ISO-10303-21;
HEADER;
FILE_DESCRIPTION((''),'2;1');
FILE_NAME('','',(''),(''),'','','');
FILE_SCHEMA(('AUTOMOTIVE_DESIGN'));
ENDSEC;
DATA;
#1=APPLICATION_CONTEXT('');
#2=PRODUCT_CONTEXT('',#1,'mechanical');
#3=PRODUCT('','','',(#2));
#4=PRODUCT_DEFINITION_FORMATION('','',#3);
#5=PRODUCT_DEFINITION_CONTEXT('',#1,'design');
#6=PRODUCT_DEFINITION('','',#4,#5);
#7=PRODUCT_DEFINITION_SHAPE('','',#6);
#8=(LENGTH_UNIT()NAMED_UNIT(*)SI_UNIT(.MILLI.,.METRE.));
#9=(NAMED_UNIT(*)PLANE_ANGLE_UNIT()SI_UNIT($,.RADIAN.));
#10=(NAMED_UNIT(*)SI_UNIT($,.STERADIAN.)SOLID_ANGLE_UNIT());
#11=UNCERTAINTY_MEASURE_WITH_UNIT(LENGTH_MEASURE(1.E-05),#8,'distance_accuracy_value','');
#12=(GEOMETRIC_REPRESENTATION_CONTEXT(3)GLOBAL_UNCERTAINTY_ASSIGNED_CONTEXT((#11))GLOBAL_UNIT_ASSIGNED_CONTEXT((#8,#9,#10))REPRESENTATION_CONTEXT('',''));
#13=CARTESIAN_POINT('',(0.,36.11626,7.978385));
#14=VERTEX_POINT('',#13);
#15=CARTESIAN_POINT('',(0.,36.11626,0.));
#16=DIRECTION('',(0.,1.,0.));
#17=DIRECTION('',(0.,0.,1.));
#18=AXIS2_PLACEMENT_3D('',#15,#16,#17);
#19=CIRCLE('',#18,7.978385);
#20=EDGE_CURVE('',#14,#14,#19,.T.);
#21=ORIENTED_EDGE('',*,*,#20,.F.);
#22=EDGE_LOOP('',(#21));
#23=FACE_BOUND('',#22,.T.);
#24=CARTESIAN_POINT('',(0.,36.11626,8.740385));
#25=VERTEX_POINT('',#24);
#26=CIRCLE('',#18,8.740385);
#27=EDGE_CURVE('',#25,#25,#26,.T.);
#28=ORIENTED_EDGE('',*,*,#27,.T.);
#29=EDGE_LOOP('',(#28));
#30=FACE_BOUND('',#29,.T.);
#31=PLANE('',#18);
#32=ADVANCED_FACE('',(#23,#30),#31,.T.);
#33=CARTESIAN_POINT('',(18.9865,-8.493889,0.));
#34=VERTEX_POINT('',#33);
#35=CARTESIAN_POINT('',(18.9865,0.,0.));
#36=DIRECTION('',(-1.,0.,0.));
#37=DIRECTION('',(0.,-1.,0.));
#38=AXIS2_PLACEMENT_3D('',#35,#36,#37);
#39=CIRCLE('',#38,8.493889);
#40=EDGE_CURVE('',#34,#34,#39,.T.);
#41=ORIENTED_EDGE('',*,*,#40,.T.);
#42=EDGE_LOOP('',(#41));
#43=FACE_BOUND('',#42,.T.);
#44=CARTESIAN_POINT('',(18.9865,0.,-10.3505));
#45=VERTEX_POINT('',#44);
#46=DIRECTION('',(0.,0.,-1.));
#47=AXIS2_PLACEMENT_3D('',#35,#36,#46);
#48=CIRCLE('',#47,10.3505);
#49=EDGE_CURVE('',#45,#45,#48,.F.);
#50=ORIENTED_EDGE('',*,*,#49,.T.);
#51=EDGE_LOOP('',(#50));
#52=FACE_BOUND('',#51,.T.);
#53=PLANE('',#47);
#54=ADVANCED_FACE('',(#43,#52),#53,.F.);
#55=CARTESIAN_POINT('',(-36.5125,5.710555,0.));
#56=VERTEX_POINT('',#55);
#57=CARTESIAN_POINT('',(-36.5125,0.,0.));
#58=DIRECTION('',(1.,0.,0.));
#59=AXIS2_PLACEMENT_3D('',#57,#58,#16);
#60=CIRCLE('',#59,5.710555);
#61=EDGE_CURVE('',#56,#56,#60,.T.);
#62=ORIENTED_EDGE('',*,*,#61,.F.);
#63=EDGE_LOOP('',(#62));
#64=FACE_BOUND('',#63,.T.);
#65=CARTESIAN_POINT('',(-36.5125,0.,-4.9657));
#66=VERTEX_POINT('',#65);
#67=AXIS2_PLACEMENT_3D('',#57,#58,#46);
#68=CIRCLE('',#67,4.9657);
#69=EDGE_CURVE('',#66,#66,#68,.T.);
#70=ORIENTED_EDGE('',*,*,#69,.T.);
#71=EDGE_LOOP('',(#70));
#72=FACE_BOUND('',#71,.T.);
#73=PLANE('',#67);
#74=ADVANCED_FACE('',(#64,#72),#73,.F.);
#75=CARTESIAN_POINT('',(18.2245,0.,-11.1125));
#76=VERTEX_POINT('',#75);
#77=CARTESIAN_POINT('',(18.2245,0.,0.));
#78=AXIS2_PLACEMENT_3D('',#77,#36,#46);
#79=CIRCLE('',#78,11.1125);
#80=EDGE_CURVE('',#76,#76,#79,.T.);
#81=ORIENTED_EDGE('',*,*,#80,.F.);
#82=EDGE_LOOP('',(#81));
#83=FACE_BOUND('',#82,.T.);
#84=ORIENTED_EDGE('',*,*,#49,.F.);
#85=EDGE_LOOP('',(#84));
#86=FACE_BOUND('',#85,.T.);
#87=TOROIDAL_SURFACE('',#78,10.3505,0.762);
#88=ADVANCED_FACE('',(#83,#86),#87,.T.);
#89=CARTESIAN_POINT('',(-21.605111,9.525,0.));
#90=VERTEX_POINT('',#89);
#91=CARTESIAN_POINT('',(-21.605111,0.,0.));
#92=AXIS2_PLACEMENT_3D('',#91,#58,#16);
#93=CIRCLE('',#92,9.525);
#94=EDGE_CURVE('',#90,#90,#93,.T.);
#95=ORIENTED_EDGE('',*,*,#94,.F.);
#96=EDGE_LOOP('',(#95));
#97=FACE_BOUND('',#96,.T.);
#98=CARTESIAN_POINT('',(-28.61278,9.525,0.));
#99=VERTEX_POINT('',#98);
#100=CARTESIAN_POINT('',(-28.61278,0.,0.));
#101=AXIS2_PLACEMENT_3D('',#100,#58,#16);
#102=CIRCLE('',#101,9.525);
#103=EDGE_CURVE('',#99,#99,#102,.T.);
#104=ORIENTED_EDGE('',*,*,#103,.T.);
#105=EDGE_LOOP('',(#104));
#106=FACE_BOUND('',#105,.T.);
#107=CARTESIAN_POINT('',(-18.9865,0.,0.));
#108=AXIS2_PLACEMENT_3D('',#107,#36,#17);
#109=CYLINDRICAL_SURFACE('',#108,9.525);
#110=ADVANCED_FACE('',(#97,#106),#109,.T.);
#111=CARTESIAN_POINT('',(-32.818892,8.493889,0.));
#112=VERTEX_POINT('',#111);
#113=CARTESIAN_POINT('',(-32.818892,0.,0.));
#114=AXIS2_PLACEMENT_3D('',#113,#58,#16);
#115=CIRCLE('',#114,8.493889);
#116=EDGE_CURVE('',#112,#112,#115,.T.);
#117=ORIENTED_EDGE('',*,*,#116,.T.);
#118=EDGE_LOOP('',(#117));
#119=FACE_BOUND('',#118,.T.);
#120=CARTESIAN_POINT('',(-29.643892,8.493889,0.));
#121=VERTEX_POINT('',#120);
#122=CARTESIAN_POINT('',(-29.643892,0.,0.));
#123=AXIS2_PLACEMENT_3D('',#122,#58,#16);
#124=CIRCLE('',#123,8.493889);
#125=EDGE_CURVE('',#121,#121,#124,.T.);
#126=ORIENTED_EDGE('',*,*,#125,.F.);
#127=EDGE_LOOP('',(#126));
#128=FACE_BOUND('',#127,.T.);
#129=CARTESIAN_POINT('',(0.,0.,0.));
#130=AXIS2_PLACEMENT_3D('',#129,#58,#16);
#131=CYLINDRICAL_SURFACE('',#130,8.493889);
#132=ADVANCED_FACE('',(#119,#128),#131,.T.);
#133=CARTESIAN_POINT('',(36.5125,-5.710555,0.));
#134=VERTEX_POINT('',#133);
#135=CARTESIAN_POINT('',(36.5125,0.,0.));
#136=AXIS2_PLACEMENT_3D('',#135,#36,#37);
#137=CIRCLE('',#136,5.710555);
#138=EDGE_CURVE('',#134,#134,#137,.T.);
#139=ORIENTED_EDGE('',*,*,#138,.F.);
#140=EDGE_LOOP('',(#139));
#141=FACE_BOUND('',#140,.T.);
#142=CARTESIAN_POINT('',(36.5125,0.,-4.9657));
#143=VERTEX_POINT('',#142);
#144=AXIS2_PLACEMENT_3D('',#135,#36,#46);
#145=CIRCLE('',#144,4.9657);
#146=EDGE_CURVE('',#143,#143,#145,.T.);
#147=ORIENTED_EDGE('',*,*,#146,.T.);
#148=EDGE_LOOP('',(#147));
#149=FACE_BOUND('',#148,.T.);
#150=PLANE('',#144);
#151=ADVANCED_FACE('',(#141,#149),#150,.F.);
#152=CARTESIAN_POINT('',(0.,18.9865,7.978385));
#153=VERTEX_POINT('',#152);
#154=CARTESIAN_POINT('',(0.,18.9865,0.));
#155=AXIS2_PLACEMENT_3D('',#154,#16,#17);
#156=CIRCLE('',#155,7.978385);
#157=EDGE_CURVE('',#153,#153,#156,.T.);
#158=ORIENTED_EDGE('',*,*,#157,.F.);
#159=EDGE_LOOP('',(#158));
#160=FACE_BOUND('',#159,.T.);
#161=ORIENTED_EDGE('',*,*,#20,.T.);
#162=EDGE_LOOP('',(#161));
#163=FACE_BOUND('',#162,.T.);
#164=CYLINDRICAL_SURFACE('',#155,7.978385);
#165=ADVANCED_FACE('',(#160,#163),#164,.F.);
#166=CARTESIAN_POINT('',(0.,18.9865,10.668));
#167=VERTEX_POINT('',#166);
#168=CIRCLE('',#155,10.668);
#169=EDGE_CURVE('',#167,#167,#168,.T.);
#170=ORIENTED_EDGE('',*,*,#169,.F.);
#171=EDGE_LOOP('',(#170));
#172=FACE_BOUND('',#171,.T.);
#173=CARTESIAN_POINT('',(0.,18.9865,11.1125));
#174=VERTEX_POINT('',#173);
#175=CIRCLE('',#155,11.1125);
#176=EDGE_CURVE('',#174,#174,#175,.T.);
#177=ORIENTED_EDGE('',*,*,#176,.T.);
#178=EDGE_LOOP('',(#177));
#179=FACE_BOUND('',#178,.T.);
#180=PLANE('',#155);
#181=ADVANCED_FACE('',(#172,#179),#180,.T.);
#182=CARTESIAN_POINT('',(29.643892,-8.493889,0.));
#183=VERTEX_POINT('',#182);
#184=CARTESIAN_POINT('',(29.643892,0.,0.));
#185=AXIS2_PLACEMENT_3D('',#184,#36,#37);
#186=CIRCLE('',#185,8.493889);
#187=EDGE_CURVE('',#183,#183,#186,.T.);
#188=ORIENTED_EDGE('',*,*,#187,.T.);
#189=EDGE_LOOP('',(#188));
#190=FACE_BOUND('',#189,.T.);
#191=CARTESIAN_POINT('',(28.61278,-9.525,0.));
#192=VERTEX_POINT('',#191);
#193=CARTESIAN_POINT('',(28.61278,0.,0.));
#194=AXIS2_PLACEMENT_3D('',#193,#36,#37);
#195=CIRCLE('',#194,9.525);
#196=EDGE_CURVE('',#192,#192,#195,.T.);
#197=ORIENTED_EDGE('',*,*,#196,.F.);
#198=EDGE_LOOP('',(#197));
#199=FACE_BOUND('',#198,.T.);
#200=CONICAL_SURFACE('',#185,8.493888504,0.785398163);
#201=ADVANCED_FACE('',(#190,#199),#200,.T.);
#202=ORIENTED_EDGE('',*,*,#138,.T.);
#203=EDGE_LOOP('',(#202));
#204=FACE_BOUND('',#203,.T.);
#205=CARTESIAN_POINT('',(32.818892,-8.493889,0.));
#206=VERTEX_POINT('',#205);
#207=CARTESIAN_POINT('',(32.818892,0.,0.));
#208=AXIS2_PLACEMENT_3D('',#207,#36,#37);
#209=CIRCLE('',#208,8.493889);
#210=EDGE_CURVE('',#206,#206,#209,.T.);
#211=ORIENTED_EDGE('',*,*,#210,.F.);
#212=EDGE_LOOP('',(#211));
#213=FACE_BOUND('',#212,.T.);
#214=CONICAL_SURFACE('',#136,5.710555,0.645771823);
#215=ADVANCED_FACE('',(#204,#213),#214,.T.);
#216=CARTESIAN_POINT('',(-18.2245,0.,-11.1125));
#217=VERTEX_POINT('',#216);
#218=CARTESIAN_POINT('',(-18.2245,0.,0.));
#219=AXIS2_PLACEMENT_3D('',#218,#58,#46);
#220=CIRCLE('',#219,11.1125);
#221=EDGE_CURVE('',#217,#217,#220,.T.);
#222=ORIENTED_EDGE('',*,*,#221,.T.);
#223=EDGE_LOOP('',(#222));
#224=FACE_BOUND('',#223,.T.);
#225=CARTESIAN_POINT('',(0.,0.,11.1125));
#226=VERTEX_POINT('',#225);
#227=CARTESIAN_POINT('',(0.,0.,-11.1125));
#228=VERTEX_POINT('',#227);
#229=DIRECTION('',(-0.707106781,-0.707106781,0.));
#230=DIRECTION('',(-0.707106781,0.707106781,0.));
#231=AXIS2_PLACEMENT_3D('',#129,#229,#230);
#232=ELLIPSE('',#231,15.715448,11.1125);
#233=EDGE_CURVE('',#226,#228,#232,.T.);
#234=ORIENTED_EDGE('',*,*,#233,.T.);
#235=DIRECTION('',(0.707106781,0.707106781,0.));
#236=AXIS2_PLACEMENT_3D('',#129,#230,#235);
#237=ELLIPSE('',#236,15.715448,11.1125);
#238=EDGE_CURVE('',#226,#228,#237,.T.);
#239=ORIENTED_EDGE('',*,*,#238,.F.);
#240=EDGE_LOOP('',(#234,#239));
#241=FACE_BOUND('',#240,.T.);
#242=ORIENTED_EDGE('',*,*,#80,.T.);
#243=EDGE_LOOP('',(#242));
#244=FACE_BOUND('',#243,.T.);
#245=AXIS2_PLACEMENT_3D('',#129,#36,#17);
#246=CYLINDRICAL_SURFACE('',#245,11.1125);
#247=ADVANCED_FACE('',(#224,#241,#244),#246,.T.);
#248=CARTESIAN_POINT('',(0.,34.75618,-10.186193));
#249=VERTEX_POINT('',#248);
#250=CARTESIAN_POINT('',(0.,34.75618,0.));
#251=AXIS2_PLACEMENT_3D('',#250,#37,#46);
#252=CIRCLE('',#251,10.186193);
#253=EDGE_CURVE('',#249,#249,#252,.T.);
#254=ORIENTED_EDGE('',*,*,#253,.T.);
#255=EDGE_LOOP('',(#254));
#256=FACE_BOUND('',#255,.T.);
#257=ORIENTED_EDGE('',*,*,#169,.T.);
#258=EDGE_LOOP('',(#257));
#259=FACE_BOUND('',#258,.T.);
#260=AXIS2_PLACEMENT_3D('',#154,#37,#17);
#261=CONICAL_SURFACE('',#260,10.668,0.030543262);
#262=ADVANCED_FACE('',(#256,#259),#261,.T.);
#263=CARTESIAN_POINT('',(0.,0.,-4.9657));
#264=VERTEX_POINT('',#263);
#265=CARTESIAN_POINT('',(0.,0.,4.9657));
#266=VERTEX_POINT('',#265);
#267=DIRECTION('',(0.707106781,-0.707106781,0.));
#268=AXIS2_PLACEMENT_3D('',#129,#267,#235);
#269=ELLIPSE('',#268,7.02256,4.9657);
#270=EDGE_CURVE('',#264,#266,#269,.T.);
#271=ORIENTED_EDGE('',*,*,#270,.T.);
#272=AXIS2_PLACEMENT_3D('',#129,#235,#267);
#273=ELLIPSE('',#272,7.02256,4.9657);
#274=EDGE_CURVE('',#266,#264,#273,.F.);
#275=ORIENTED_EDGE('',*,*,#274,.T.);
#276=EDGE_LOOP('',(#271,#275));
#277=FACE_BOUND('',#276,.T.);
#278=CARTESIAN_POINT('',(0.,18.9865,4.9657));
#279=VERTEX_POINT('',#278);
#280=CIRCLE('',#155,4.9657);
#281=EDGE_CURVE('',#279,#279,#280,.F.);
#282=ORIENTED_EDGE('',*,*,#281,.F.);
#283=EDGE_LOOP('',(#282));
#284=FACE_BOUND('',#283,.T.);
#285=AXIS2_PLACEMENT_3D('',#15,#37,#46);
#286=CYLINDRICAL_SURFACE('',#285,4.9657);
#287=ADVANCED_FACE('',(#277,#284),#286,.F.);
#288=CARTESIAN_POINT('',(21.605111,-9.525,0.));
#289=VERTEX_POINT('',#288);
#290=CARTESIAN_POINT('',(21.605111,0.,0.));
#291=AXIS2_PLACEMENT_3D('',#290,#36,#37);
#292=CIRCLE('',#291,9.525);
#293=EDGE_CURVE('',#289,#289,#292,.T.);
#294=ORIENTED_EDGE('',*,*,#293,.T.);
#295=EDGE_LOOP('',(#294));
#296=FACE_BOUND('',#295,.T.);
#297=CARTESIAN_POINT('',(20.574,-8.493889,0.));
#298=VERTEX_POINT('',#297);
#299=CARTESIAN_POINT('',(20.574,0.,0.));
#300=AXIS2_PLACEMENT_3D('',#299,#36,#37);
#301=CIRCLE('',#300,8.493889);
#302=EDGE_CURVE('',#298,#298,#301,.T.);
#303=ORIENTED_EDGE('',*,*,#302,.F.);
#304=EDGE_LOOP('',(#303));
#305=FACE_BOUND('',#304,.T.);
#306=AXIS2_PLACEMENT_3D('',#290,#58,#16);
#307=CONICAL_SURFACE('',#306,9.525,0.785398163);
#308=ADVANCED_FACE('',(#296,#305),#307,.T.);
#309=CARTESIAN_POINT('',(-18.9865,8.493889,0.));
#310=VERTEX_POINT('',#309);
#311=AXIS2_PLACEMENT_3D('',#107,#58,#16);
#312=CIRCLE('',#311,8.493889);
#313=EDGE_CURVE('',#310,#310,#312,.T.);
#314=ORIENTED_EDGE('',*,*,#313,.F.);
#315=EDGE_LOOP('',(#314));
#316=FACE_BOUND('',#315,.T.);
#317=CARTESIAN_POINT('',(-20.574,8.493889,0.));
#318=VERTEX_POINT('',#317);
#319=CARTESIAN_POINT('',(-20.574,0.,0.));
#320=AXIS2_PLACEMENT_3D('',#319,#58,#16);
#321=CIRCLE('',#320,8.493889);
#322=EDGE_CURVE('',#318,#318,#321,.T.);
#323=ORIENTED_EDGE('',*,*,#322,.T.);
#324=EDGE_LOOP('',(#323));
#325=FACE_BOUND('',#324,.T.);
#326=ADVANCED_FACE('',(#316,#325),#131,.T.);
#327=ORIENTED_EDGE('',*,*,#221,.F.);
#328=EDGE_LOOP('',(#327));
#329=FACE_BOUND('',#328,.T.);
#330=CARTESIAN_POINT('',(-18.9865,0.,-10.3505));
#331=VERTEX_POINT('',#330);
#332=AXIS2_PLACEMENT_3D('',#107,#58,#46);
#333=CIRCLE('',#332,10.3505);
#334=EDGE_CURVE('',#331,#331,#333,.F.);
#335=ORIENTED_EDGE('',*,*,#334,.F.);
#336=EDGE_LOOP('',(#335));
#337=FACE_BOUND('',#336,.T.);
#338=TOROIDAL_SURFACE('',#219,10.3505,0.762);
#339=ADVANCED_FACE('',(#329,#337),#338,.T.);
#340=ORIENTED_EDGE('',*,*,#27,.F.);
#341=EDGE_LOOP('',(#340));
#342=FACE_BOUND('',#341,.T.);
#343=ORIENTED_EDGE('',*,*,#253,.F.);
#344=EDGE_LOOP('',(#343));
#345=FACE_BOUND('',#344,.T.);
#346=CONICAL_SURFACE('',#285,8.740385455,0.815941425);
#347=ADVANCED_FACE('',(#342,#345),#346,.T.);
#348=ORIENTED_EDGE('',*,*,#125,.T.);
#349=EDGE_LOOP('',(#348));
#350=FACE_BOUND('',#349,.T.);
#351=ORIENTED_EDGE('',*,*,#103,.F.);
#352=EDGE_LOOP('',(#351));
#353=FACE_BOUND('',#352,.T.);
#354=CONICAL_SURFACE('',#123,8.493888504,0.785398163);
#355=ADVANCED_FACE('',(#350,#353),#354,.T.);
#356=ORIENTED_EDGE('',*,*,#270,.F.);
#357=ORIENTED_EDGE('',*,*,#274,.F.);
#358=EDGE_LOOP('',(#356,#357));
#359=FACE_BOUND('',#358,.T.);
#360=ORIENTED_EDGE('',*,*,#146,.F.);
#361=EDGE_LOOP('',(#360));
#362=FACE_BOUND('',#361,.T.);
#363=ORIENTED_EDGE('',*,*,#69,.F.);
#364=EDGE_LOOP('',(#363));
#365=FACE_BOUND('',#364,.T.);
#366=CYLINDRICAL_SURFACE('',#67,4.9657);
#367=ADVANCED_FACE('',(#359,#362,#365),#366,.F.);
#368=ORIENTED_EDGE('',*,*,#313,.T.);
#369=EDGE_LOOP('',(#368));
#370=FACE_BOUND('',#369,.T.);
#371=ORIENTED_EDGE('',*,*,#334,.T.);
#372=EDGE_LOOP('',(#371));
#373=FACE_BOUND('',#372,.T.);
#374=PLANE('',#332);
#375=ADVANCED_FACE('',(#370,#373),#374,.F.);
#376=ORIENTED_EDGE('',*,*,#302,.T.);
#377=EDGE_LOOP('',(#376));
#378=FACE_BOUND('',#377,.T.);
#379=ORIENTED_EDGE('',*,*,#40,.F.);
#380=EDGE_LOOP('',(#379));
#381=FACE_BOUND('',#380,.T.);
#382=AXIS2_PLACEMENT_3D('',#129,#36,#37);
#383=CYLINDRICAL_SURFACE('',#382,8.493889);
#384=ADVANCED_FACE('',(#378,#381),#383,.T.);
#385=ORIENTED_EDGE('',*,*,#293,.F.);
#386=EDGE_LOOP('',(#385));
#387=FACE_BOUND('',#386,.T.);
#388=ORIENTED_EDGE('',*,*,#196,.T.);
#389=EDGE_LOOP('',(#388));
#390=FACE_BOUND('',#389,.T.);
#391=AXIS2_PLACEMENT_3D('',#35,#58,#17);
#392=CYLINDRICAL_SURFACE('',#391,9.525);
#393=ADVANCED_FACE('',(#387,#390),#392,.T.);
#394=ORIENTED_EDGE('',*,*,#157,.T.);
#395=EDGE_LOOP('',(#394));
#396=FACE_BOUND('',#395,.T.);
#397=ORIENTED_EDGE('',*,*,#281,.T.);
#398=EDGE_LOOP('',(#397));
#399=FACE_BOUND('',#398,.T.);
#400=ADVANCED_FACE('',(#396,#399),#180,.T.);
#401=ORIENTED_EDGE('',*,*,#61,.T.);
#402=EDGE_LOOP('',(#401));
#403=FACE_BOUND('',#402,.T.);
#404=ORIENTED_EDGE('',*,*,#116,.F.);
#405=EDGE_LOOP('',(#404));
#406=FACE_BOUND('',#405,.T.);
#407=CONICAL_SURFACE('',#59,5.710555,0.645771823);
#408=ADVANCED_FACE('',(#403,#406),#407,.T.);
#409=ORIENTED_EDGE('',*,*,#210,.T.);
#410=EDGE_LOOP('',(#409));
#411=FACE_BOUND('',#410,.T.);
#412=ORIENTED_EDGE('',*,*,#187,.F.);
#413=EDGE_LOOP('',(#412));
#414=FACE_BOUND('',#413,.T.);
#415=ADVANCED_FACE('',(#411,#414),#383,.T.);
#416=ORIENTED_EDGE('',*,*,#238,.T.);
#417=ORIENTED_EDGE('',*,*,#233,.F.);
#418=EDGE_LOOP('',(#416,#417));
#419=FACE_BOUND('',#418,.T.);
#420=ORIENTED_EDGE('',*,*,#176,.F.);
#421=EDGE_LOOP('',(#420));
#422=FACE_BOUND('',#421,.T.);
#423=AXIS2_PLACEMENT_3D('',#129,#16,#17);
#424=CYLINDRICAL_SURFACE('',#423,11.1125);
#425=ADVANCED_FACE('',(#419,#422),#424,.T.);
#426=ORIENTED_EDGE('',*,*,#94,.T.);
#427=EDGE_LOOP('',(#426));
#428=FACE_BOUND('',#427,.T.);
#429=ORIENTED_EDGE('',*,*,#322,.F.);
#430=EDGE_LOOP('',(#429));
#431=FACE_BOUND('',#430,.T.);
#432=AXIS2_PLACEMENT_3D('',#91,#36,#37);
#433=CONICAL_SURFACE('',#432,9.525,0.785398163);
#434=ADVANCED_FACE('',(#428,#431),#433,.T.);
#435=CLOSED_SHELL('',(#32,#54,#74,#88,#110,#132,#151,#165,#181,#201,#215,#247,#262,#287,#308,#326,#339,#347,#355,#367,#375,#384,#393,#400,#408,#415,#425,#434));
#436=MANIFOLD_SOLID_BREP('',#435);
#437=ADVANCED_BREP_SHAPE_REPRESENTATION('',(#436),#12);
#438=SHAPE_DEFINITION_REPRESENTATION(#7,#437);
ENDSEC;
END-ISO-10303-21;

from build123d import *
from build123d.topology import SkipClean

# Parameters (mm, degrees)
SKETCH2_R           = 9.525
EXTRUDE1_DEPTH      = 17.526
SKETCH15_R          = 11.1125
BOSS_EXTRUDE1_DEPTH = 18.9865
SKETCH16_R          = 4.9657
CUT_EXTRUDE1_DEPTH  = 40.750949281
SKETCH20_R          = 11.1125
BOSS_EXTRUDE2_DEPTH = 18.9865
SKETCH22_R          = 10.668
BOSS_EXTRUDE3_DEPTH = 17.12976
BOSS_EXTRUDE3_TAPER = 1.75
CHAMFER1_SIZE       = 1.360714286
CHAMFER1_SIZE_2     = 1.404253042
SKETCH25_R          = 10.668
BOSS_EXTRUDE4_DEPTH = 17.12976
BOSS_EXTRUDE4_DRAFT = -15
SKETCH28_R          = 7.978385455
CUT_EXTRUDE6_DEPTH  = 17.12976
FILLET1_R           = 0.762
CIRPATTERN1_COUNT   = 2
CIRPATTERN1_ANGLE   = 180
SKETCH26_R          = 4.9657
CUT_EXTRUDE4_DEPTH  = 83.22239678
SKETCH29_R          = 4.9657
CUT_EXTRUDE7_DEPTH  = 53.545547444


with BuildPart() as part:
    # Sketch2 → Extrude1 (new body)
    with BuildSketch(Plane(origin=(-36.5125, 0, 0), x_dir=(0, 0, -1), z_dir=(1, 0, 0))):
        Circle(SKETCH2_R)
    extrude(amount=EXTRUDE1_DEPTH)

    # Sketch5 → Cut-Revolve1 (revolve, cut)
    with BuildSketch(Plane.XY):
        Polygon((-32.818891687, 8.493888504), (-29.643891687, 8.493888504), (-28.612780191, 9.525), (-36.5125, 9.525), (-36.5125, 5.710555), align=None)
        Polygon((-18.9865, 8.493888504), (-20.574, 8.493888504), (-21.605111496, 9.525), (-18.9865, 9.525), align=None)
    revolve(axis=Axis((0, 0, 0), (-1, 0, 0)), mode=Mode.SUBTRACT)

    # Sketch15 → Boss-Extrude1 (add)
    with BuildSketch(Plane(origin=(-18.9865, 0, 0), x_dir=(0, 0, -1), z_dir=(1, 0, 0))):
        Circle(SKETCH15_R)
    extrude(amount=BOSS_EXTRUDE1_DEPTH)

    # Sketch16 → Cut-Extrude1 (cut, through all)
    with BuildSketch(Plane(origin=(0, 0, 0), x_dir=(0, 0, -1), z_dir=(1, 0, 0))):
        Circle(SKETCH16_R)
    extrude(amount=-CUT_EXTRUDE1_DEPTH, mode=Mode.SUBTRACT)

    # Fillet1
    fillet1_edges = [part.edges().sort_by_distance(p)[0] for p in [
        (-18.9865, 0, 11.1125),
    ]]
    fillet(fillet1_edges, radius=FILLET1_R)


with BuildPart() as body_2:
    # Sketch20 → Boss-Extrude2 (new body)
    with BuildSketch(Plane(origin=(0, 18.9865, 0), x_dir=(-1, 0, 0), z_dir=(0, 1, 0))):
        with Locations(Location((0, 0, 0), (0, 0, 90))):
            Circle(SKETCH20_R)
    extrude(amount=-BOSS_EXTRUDE2_DEPTH)


with BuildPart() as body_3:
    # Sketch22 → Boss-Extrude3 (new body)
    with BuildSketch(Plane(origin=(0, 18.9865, 0), x_dir=(-1, 0, 0), z_dir=(0, 1, 0))):
        Circle(SKETCH22_R)
    extrude(amount=BOSS_EXTRUDE3_DEPTH, taper=BOSS_EXTRUDE3_TAPER)

    # Chamfer1
    # the kernel refuses this chamfer: 1.404253042, 1.360714286 mm, written as the material it takes off along each edge
    with BuildSketch(Plane(origin=(0, 36.11626, 0), x_dir=(-1, 0, 0), z_dir=(0, 0, 1))) as chamfer1_piece_1:
        Polygon((10.144638497 + CHAMFER1_SIZE * 0.0305385132034, CHAMFER1_SIZE * 0.999533590627), (10.144638497 - CHAMFER1_SIZE_2, 0), (10.144638497, 0), align=None)
    revolve(axis=Axis((0, 36.11626, 0), (0, -1, 0)), mode=Mode.SUBTRACT)


with BuildPart() as boss_extrude4_tool:
    # Sketch25 → Boss-Extrude4 (with draft: the straight prism first)
    with BuildSketch(Plane.XZ.offset(-18.9865)):
        Circle(SKETCH25_R)
    extrude(amount=-BOSS_EXTRUDE4_DEPTH)
    # Boss-Extrude4: the draft: its side faces are tilted about the plane it starts from
    boss_extrude4_sides = [boss_extrude4_tool.faces().sort_by_distance(p)[0] for p in [
        (-10.668, 27.55138, 0),
    ]]
    draft(boss_extrude4_sides, Plane.XZ.offset(-18.9865), BOSS_EXTRUDE4_DRAFT)


with BuildPart() as body_3_1:
    add(body_3.part)

    # Boss-Extrude4: add boss_extrude4_tool
    add(boss_extrude4_tool.part)

    # Sketch28 → Cut-Extrude6 (cut)
    with BuildSketch(Plane(origin=(0, 36.11626, 0), x_dir=(1, 0, 0), z_dir=(0, 1, 0))):
        with Locations(Location((0, 0, 0), (0, 0, 270))):
            Circle(SKETCH28_R)
    extrude(amount=-CUT_EXTRUDE6_DEPTH, mode=Mode.SUBTRACT)


with BuildPart() as cirpattern1_1:
    # CirPattern1: pattern copy
    add(part.part.rotate(Axis((0, 0, 12.651043997), (0, 0, -1)), 1 * CIRPATTERN1_ANGLE / (CIRPATTERN1_COUNT - 1)))


with BuildPart() as part_1:
    add(part.part)

    # Combine2: union body 3, body 2, CirPattern1_1
    add(body_3_1.part)
    add(body_2.part)
    add(cirpattern1_1.part)

    # Sketch30 → Revolve1 (revolve)
    with SkipClean():  # the faces are left unmerged after this step: merging them gives an invalid solid
        with BuildSketch(Plane.XY, mode=Mode.PRIVATE) as revolve1_sk:
            with BuildLine():
                Line((0, 18.9865), (0, 9.49325))
                ThreePointArc((0, 9.49325), (-5.981989992, 13.352586812), (-10.922, 18.4785))
                Line((-10.922, 18.4785), (-10.922, 18.9865))
                Line((-10.922, 18.9865), (0, 18.9865))
            make_face()
        revolve(revolve1_sk.sketch.rotate(Axis((0, 18.9865, 0), (0, -1, 0)), 270), axis=Axis((0, 18.9865, 0), (0, -1, 0)))

    # Sketch26 → Cut-Extrude4 (cut, through all)
    with SkipClean():  # the faces are left unmerged after this step: merging them gives an invalid solid
        with BuildSketch(Plane.ZY.offset(36.5125)):
            with Locations(Location((0, 0, 0), (0, 0, 180))):
                Circle(SKETCH26_R)
        extrude(amount=-CUT_EXTRUDE4_DEPTH, mode=Mode.SUBTRACT)

    # Sketch29 → Cut-Extrude7 (cut, through all)
    with SkipClean():  # the faces are left unmerged after this step: merging them gives an invalid solid
        with BuildSketch(Plane(origin=(0, 0, 0), x_dir=(1, 0, 0), z_dir=(0, 1, 0))):
            with Locations(Location((0, 0, 0), (0, 0, 270))):
                Circle(SKETCH29_R)
        extrude(amount=CUT_EXTRUDE7_DEPTH, mode=Mode.SUBTRACT)


solid = part_1.part
